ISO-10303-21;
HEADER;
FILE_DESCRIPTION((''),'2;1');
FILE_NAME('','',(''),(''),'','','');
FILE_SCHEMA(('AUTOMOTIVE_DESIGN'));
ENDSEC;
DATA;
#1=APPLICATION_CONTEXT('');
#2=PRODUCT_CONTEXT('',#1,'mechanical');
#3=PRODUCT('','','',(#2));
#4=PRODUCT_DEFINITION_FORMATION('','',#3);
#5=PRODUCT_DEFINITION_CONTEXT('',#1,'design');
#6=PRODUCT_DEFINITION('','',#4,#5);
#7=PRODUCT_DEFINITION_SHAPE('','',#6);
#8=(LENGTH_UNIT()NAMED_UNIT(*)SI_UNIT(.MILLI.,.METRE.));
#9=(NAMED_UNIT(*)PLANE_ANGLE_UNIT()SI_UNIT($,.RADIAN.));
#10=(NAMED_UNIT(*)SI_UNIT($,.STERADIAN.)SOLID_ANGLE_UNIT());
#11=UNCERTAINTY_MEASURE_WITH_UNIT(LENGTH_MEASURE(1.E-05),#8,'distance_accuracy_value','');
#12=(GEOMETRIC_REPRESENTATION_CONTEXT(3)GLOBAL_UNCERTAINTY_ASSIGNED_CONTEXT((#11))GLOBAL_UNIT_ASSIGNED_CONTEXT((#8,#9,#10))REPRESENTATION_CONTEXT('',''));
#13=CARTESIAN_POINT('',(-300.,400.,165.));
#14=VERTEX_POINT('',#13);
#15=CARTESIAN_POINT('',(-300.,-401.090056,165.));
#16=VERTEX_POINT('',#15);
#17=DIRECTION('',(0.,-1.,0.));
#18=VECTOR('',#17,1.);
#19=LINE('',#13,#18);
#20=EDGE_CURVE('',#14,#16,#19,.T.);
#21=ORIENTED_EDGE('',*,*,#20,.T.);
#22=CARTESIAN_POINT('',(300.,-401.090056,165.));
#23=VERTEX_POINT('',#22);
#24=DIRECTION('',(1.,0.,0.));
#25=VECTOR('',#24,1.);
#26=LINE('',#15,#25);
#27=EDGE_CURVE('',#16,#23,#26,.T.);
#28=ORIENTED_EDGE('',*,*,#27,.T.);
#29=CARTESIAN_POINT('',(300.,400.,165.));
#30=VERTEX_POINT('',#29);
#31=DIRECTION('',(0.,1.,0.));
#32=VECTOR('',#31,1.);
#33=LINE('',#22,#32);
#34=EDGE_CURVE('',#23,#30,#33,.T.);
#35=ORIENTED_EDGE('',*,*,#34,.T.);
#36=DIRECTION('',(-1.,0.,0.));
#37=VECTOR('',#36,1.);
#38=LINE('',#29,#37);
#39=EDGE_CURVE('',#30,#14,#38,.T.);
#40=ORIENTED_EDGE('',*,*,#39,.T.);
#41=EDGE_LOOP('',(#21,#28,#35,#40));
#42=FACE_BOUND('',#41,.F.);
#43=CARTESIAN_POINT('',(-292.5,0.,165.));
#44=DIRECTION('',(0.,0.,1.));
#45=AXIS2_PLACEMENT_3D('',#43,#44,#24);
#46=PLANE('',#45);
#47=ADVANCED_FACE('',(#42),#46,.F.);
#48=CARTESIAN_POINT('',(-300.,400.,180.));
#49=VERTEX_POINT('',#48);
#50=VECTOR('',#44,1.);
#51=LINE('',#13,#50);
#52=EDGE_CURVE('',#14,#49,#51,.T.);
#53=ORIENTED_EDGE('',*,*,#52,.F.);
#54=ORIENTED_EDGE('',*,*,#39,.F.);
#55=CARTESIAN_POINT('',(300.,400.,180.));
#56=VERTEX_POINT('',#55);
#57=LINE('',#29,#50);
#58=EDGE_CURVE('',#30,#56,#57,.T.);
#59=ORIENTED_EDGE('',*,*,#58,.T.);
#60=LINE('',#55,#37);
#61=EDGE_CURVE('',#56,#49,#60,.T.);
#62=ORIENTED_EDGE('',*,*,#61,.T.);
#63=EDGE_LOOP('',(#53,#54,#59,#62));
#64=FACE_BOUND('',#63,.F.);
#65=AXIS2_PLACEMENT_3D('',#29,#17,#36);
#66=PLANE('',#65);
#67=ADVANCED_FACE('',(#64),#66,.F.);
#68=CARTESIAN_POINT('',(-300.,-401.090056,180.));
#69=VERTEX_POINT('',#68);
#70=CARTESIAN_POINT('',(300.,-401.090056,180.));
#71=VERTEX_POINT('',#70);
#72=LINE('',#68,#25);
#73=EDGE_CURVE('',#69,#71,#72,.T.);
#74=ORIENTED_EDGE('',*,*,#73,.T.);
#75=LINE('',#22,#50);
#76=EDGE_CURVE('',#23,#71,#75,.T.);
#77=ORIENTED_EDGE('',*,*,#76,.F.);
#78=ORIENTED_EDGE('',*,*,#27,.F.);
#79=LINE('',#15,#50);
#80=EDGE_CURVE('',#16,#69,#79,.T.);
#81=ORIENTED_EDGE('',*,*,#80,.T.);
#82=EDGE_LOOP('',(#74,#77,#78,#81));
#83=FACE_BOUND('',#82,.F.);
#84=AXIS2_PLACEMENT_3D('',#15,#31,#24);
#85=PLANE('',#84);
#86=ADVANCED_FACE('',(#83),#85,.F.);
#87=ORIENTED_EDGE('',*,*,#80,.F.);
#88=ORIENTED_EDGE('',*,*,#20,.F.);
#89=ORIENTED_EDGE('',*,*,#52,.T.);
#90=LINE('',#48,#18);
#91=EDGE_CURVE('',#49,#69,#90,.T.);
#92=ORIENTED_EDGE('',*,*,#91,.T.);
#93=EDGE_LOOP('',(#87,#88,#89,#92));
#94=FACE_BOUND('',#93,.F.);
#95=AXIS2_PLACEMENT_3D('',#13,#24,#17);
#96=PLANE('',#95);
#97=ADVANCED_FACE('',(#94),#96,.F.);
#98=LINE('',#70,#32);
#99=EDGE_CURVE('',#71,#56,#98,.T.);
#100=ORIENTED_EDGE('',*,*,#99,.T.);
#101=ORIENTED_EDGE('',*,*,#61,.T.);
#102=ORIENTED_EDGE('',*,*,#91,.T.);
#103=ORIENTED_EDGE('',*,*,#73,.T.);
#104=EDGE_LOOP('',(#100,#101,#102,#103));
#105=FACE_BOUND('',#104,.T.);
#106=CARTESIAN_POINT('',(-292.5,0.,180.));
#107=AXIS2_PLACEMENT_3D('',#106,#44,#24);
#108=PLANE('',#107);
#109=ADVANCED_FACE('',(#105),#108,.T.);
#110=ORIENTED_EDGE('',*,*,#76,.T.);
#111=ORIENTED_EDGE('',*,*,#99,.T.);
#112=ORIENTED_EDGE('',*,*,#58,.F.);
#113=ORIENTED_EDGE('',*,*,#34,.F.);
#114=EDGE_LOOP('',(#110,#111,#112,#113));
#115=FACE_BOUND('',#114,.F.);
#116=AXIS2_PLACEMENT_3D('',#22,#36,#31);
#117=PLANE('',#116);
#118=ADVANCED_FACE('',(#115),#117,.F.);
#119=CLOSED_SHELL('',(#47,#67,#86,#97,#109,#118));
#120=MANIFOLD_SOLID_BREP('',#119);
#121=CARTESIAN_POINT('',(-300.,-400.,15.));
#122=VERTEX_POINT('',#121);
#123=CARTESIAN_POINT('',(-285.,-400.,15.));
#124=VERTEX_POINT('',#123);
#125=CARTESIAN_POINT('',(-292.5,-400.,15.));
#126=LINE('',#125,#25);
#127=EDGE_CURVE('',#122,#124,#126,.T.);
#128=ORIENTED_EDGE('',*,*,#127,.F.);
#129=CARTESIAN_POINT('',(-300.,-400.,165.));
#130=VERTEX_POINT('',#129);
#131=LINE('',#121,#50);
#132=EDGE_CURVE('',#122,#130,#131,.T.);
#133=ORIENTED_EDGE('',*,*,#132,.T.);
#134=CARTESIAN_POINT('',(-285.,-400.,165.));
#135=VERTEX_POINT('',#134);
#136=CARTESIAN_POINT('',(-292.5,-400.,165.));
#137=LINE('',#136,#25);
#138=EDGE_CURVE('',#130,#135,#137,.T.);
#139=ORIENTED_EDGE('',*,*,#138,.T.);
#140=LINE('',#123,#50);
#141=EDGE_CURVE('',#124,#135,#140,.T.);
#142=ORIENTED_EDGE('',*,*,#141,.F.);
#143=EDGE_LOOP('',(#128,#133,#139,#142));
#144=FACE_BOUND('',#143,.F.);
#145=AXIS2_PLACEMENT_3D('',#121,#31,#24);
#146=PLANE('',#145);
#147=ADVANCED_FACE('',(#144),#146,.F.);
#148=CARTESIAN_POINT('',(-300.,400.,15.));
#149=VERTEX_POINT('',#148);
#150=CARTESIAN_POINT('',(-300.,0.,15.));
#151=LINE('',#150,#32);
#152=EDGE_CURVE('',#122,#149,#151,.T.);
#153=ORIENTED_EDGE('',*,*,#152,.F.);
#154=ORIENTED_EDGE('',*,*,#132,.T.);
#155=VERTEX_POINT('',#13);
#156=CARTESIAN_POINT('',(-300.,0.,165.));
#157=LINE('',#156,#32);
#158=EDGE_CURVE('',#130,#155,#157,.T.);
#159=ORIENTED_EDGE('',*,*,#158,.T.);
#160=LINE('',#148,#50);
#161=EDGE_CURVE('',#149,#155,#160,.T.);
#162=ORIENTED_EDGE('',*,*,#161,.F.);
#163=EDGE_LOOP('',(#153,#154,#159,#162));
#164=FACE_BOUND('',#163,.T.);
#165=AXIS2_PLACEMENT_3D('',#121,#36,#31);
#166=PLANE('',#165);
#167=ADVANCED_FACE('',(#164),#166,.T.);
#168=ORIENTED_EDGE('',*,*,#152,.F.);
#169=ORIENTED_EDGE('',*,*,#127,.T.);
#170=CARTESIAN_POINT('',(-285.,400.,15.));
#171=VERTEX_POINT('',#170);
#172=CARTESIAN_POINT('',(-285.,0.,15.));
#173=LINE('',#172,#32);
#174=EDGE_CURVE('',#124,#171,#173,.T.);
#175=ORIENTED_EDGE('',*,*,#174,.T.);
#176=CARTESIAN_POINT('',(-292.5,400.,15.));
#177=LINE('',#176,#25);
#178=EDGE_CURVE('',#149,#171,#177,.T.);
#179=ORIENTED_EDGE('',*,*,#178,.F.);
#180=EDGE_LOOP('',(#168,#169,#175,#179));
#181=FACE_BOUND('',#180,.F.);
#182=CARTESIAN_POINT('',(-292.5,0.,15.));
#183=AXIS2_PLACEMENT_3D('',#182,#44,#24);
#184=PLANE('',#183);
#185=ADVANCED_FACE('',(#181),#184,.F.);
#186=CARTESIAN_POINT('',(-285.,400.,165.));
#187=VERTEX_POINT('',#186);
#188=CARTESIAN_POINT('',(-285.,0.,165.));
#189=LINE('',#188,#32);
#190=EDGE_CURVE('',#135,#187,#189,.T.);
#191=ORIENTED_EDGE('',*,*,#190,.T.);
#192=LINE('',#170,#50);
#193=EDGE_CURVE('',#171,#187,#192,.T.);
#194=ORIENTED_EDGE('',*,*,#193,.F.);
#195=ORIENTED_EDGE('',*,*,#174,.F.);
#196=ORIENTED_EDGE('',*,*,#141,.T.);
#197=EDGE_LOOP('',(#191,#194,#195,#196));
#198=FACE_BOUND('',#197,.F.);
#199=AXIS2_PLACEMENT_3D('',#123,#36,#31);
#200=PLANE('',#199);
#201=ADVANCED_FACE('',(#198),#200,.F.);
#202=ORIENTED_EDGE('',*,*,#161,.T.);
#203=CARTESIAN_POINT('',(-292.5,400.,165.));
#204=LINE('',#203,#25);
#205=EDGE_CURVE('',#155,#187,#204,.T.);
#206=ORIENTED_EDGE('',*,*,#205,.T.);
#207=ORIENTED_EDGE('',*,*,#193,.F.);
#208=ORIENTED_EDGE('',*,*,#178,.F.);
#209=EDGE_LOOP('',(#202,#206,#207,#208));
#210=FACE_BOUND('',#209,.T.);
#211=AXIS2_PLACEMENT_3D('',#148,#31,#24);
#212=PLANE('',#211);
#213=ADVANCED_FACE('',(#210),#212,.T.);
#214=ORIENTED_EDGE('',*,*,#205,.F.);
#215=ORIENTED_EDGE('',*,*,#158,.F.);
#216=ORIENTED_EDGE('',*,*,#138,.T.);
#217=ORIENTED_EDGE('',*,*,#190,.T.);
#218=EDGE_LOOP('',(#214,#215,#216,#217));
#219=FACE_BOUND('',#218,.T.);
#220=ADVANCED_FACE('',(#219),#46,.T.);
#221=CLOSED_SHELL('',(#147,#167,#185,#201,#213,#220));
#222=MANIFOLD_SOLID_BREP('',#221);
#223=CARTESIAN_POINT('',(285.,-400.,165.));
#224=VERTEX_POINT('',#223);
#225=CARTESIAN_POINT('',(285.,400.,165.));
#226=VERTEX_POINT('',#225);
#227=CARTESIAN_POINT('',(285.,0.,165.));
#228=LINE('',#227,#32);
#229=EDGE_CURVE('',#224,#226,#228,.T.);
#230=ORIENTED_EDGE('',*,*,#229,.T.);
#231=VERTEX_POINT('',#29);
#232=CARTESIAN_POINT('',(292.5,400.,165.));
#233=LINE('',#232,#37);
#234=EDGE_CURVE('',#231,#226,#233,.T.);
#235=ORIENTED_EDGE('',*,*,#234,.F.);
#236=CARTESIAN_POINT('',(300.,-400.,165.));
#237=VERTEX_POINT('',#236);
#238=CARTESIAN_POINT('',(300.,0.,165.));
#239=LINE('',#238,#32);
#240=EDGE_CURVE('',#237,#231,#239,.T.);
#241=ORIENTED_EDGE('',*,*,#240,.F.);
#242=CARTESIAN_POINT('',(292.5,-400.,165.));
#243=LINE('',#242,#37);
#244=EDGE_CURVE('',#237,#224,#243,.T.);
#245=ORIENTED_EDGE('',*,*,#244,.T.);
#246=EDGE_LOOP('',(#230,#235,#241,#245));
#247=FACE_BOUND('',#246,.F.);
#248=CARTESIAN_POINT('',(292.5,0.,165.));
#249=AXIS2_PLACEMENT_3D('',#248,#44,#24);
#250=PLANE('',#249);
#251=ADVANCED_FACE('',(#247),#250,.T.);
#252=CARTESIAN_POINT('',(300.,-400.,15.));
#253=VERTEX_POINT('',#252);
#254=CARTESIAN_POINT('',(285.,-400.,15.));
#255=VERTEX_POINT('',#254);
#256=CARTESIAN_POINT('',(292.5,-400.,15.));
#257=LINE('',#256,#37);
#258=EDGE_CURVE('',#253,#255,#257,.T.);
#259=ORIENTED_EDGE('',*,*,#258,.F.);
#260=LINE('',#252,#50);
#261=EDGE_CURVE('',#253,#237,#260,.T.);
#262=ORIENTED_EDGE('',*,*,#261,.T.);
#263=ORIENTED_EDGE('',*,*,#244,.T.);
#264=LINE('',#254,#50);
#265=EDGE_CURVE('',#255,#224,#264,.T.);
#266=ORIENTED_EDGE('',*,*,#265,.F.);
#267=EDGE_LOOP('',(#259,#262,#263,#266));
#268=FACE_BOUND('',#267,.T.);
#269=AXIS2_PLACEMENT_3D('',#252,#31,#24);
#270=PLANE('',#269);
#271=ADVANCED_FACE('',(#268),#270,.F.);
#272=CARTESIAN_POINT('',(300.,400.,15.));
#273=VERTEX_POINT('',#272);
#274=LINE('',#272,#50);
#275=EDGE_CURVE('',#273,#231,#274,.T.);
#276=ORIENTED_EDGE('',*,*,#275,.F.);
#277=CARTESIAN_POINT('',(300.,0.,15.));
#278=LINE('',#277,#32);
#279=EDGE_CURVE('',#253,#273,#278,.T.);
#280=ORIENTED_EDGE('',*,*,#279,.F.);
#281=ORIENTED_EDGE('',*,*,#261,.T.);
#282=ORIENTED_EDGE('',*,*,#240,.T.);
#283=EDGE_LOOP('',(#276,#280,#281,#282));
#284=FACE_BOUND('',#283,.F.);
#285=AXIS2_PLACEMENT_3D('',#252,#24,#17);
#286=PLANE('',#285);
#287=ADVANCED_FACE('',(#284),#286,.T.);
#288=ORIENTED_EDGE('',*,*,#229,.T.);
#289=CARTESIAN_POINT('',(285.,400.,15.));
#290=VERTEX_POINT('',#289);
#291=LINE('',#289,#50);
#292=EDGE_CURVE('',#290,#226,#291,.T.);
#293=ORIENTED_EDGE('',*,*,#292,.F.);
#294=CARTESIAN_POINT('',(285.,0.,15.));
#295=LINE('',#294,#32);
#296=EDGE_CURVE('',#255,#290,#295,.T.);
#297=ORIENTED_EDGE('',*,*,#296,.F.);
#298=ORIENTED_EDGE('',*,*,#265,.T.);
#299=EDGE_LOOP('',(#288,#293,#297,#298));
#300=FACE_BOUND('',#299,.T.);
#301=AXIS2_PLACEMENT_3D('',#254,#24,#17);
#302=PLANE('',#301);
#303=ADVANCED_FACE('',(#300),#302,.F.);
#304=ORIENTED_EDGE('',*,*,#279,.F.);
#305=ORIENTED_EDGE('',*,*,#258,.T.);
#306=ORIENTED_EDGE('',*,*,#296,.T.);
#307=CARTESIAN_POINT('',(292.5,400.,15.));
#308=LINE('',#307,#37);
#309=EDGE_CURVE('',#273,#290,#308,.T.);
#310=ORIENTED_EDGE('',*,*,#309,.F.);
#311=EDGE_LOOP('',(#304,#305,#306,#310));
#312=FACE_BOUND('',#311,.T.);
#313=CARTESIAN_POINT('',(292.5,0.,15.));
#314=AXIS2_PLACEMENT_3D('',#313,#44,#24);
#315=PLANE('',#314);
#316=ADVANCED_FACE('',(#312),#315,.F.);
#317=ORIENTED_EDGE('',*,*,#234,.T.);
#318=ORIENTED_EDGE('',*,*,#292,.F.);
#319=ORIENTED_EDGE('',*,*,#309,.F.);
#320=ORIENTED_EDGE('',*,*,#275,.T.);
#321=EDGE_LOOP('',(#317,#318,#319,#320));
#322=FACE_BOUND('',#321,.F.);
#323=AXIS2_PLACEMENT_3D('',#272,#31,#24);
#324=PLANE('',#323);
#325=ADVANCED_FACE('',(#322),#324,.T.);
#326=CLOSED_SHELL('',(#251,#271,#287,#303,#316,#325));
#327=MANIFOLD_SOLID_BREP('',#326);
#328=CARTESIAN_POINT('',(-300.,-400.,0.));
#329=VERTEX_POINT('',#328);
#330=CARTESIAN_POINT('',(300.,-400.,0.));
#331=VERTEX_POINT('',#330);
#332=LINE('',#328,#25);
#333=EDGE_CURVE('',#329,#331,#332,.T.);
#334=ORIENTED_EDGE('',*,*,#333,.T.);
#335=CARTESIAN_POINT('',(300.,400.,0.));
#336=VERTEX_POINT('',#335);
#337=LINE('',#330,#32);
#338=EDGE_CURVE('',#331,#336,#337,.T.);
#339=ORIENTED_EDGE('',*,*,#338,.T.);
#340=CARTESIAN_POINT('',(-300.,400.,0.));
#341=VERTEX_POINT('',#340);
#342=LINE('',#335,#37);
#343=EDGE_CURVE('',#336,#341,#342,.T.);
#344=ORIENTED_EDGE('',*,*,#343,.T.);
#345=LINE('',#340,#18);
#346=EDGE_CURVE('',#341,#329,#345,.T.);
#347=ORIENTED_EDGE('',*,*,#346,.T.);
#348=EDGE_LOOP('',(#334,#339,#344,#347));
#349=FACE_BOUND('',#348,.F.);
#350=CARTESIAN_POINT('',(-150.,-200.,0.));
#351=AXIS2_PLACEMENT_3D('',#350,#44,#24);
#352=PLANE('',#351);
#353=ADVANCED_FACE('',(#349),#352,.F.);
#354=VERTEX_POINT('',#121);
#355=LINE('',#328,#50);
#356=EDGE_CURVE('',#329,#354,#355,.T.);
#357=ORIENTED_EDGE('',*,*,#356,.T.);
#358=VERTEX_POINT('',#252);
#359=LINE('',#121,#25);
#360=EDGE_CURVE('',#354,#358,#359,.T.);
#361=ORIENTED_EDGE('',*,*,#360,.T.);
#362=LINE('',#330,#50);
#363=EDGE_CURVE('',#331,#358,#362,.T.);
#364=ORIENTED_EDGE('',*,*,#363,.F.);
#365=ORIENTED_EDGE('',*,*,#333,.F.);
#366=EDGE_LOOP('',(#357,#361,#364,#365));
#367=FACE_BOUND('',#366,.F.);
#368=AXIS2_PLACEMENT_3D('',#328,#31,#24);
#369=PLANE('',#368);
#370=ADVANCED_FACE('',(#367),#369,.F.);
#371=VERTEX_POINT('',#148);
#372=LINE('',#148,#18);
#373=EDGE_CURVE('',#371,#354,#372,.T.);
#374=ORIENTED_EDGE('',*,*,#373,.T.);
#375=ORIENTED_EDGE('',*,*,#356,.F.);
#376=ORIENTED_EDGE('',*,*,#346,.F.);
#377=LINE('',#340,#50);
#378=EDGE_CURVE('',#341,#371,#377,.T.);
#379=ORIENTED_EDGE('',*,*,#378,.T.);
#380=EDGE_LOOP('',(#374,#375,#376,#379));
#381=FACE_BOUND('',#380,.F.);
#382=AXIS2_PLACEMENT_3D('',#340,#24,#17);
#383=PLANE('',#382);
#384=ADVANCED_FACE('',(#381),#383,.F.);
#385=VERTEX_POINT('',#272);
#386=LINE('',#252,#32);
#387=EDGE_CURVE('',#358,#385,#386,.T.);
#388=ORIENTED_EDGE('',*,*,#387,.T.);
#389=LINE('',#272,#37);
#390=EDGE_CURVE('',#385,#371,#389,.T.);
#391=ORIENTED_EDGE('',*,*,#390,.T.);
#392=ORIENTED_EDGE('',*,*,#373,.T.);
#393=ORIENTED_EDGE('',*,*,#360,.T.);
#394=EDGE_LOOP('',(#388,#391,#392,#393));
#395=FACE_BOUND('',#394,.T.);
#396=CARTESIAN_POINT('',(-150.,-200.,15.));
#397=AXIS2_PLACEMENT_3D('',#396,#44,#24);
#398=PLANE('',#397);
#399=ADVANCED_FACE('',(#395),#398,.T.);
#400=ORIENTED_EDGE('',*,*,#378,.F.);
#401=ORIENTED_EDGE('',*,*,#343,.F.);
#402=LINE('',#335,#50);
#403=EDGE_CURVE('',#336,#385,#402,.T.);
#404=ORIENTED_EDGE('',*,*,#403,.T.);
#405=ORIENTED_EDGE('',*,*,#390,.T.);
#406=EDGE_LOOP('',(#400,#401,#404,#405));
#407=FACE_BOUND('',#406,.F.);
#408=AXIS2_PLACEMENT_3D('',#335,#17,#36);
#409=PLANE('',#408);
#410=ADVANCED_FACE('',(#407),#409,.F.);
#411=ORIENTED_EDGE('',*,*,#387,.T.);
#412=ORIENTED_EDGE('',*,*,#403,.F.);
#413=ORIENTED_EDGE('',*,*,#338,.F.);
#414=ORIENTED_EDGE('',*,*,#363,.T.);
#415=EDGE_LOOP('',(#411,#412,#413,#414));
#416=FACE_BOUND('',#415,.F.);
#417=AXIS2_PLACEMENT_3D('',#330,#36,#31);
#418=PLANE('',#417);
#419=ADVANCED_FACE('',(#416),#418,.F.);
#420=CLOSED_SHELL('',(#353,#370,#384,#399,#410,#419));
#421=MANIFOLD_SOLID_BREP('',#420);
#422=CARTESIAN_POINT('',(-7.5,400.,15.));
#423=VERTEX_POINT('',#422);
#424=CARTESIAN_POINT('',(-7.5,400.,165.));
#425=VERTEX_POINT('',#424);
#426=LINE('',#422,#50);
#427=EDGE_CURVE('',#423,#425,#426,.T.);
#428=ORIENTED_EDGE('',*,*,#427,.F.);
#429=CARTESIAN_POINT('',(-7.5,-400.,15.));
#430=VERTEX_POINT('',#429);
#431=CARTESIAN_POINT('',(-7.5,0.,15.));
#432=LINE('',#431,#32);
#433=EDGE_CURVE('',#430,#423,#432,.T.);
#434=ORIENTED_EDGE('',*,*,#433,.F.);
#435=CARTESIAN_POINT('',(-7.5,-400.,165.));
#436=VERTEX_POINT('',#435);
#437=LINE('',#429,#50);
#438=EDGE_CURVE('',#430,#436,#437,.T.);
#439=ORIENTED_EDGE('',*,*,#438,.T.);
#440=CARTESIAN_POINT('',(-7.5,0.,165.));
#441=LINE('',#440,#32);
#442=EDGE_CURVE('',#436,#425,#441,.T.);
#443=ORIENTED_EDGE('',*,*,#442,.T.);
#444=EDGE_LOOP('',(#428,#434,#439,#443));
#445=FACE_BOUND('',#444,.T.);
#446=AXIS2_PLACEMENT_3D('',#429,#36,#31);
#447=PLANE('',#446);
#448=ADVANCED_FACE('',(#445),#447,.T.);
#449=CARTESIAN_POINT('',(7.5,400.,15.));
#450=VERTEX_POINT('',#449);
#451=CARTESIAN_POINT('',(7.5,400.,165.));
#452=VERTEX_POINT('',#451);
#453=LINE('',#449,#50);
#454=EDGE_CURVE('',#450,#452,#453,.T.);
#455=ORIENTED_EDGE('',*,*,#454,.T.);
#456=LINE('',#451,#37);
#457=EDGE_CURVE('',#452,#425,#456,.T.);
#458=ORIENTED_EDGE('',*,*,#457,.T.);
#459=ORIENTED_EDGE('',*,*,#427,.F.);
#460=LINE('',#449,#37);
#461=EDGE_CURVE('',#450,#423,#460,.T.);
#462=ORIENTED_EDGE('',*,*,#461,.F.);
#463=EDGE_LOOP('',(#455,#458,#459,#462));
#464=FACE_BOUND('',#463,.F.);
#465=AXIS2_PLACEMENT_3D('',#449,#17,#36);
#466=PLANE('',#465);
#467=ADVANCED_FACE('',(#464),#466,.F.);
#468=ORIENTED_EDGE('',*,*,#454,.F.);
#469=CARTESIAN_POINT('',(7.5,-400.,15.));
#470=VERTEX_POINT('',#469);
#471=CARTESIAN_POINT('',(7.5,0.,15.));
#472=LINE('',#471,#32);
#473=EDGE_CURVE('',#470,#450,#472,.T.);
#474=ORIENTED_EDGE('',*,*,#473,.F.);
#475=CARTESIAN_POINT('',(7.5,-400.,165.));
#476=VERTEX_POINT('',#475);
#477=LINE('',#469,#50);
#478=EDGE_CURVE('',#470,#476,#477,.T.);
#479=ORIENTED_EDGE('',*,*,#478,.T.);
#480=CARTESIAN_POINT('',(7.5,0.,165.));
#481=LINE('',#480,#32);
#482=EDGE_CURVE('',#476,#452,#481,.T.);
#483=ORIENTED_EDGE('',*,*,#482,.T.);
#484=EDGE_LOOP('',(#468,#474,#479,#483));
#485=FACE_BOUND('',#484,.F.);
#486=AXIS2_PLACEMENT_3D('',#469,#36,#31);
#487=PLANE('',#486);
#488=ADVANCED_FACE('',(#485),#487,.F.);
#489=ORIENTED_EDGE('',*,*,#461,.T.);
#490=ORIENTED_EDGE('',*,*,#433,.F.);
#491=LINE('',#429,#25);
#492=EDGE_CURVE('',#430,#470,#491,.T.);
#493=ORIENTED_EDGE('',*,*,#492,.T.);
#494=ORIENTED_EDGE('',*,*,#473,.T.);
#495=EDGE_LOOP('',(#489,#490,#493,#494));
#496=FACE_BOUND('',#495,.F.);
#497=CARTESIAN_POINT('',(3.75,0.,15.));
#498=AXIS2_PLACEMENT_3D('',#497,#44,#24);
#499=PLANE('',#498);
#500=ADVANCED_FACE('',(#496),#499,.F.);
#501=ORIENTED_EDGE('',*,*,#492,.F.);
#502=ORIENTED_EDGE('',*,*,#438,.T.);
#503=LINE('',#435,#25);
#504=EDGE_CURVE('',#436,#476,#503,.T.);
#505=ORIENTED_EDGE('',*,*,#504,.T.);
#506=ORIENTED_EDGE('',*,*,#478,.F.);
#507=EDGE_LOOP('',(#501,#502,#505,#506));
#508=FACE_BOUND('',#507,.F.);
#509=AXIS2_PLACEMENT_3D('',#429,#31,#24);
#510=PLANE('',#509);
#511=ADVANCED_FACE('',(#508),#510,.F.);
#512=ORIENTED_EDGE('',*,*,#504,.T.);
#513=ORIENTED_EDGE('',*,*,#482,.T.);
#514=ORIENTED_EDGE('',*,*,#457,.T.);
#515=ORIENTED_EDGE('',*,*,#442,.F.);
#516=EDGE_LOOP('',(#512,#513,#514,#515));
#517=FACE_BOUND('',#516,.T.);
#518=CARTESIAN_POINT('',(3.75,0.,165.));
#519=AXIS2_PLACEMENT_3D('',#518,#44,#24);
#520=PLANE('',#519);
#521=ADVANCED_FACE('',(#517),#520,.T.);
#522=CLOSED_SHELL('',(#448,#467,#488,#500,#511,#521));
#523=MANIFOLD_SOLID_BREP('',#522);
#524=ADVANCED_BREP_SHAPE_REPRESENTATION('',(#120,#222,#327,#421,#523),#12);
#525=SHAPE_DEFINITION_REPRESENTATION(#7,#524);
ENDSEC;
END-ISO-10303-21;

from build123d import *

# Parameters (mm, degrees)
F0_W     = 300
F0_H     = 400
F1_DEPTH = 15
F2_W     = 15
F2_H     = 800
F3_DEPTH = 150
F5_W     = 7.5
F5_H     = 800
F6_DEPTH = 150
F7_W     = 15
F7_H     = 800
F8_DEPTH = 15


with BuildPart() as f1:
    # F0 (on Top) → F1 (new body)
    with BuildSketch(Plane.XY):
        with Locations((-150, -200)):
            Rectangle(F0_W, F0_H)
        with Locations((150, -200)):
            Rectangle(F0_W, F0_H)
        with Locations((150, 200)):
            Rectangle(F0_W, F0_H)
        with Locations((-150, 200)):
            Rectangle(F0_W, F0_H)
    extrude(amount=F1_DEPTH)


with BuildPart() as f3:
    # F2 (on face) → F3 (new body)
    with BuildSketch(Plane.XY.offset(15)):
        with Locations((-292.5, 0)):
            Rectangle(F2_W, F2_H)
    extrude(amount=F3_DEPTH)


with BuildPart() as f4_1:
    # F4: instance of F3
    add(f3.part.mirror(Plane.YZ))


with BuildPart() as f6:
    # F5 (on face) → F6 (new body)
    with BuildSketch(Plane.XY.offset(15)):
        with Locations((3.75, 0)):
            Rectangle(F5_W, F5_H)
        with Locations((-3.75, 0)):
            Rectangle(F5_W, F5_H)
    extrude(amount=F6_DEPTH)


with BuildPart() as f8:
    # F7 (on face) → F8 (new body)
    with BuildSketch(Plane.XY.offset(165)):
        with Locations((-292.5, 0)):
            Rectangle(F7_W, F7_H)
        Polygon((300, 400), (-285, 400), (-285, -400), (-300, -400), (-300, -401.0900557041), (300, -401.0900557041), align=None)
    extrude(amount=F8_DEPTH)


solid = Compound([f1.part, f3.part, f4_1.part, f6.part, f8.part])
